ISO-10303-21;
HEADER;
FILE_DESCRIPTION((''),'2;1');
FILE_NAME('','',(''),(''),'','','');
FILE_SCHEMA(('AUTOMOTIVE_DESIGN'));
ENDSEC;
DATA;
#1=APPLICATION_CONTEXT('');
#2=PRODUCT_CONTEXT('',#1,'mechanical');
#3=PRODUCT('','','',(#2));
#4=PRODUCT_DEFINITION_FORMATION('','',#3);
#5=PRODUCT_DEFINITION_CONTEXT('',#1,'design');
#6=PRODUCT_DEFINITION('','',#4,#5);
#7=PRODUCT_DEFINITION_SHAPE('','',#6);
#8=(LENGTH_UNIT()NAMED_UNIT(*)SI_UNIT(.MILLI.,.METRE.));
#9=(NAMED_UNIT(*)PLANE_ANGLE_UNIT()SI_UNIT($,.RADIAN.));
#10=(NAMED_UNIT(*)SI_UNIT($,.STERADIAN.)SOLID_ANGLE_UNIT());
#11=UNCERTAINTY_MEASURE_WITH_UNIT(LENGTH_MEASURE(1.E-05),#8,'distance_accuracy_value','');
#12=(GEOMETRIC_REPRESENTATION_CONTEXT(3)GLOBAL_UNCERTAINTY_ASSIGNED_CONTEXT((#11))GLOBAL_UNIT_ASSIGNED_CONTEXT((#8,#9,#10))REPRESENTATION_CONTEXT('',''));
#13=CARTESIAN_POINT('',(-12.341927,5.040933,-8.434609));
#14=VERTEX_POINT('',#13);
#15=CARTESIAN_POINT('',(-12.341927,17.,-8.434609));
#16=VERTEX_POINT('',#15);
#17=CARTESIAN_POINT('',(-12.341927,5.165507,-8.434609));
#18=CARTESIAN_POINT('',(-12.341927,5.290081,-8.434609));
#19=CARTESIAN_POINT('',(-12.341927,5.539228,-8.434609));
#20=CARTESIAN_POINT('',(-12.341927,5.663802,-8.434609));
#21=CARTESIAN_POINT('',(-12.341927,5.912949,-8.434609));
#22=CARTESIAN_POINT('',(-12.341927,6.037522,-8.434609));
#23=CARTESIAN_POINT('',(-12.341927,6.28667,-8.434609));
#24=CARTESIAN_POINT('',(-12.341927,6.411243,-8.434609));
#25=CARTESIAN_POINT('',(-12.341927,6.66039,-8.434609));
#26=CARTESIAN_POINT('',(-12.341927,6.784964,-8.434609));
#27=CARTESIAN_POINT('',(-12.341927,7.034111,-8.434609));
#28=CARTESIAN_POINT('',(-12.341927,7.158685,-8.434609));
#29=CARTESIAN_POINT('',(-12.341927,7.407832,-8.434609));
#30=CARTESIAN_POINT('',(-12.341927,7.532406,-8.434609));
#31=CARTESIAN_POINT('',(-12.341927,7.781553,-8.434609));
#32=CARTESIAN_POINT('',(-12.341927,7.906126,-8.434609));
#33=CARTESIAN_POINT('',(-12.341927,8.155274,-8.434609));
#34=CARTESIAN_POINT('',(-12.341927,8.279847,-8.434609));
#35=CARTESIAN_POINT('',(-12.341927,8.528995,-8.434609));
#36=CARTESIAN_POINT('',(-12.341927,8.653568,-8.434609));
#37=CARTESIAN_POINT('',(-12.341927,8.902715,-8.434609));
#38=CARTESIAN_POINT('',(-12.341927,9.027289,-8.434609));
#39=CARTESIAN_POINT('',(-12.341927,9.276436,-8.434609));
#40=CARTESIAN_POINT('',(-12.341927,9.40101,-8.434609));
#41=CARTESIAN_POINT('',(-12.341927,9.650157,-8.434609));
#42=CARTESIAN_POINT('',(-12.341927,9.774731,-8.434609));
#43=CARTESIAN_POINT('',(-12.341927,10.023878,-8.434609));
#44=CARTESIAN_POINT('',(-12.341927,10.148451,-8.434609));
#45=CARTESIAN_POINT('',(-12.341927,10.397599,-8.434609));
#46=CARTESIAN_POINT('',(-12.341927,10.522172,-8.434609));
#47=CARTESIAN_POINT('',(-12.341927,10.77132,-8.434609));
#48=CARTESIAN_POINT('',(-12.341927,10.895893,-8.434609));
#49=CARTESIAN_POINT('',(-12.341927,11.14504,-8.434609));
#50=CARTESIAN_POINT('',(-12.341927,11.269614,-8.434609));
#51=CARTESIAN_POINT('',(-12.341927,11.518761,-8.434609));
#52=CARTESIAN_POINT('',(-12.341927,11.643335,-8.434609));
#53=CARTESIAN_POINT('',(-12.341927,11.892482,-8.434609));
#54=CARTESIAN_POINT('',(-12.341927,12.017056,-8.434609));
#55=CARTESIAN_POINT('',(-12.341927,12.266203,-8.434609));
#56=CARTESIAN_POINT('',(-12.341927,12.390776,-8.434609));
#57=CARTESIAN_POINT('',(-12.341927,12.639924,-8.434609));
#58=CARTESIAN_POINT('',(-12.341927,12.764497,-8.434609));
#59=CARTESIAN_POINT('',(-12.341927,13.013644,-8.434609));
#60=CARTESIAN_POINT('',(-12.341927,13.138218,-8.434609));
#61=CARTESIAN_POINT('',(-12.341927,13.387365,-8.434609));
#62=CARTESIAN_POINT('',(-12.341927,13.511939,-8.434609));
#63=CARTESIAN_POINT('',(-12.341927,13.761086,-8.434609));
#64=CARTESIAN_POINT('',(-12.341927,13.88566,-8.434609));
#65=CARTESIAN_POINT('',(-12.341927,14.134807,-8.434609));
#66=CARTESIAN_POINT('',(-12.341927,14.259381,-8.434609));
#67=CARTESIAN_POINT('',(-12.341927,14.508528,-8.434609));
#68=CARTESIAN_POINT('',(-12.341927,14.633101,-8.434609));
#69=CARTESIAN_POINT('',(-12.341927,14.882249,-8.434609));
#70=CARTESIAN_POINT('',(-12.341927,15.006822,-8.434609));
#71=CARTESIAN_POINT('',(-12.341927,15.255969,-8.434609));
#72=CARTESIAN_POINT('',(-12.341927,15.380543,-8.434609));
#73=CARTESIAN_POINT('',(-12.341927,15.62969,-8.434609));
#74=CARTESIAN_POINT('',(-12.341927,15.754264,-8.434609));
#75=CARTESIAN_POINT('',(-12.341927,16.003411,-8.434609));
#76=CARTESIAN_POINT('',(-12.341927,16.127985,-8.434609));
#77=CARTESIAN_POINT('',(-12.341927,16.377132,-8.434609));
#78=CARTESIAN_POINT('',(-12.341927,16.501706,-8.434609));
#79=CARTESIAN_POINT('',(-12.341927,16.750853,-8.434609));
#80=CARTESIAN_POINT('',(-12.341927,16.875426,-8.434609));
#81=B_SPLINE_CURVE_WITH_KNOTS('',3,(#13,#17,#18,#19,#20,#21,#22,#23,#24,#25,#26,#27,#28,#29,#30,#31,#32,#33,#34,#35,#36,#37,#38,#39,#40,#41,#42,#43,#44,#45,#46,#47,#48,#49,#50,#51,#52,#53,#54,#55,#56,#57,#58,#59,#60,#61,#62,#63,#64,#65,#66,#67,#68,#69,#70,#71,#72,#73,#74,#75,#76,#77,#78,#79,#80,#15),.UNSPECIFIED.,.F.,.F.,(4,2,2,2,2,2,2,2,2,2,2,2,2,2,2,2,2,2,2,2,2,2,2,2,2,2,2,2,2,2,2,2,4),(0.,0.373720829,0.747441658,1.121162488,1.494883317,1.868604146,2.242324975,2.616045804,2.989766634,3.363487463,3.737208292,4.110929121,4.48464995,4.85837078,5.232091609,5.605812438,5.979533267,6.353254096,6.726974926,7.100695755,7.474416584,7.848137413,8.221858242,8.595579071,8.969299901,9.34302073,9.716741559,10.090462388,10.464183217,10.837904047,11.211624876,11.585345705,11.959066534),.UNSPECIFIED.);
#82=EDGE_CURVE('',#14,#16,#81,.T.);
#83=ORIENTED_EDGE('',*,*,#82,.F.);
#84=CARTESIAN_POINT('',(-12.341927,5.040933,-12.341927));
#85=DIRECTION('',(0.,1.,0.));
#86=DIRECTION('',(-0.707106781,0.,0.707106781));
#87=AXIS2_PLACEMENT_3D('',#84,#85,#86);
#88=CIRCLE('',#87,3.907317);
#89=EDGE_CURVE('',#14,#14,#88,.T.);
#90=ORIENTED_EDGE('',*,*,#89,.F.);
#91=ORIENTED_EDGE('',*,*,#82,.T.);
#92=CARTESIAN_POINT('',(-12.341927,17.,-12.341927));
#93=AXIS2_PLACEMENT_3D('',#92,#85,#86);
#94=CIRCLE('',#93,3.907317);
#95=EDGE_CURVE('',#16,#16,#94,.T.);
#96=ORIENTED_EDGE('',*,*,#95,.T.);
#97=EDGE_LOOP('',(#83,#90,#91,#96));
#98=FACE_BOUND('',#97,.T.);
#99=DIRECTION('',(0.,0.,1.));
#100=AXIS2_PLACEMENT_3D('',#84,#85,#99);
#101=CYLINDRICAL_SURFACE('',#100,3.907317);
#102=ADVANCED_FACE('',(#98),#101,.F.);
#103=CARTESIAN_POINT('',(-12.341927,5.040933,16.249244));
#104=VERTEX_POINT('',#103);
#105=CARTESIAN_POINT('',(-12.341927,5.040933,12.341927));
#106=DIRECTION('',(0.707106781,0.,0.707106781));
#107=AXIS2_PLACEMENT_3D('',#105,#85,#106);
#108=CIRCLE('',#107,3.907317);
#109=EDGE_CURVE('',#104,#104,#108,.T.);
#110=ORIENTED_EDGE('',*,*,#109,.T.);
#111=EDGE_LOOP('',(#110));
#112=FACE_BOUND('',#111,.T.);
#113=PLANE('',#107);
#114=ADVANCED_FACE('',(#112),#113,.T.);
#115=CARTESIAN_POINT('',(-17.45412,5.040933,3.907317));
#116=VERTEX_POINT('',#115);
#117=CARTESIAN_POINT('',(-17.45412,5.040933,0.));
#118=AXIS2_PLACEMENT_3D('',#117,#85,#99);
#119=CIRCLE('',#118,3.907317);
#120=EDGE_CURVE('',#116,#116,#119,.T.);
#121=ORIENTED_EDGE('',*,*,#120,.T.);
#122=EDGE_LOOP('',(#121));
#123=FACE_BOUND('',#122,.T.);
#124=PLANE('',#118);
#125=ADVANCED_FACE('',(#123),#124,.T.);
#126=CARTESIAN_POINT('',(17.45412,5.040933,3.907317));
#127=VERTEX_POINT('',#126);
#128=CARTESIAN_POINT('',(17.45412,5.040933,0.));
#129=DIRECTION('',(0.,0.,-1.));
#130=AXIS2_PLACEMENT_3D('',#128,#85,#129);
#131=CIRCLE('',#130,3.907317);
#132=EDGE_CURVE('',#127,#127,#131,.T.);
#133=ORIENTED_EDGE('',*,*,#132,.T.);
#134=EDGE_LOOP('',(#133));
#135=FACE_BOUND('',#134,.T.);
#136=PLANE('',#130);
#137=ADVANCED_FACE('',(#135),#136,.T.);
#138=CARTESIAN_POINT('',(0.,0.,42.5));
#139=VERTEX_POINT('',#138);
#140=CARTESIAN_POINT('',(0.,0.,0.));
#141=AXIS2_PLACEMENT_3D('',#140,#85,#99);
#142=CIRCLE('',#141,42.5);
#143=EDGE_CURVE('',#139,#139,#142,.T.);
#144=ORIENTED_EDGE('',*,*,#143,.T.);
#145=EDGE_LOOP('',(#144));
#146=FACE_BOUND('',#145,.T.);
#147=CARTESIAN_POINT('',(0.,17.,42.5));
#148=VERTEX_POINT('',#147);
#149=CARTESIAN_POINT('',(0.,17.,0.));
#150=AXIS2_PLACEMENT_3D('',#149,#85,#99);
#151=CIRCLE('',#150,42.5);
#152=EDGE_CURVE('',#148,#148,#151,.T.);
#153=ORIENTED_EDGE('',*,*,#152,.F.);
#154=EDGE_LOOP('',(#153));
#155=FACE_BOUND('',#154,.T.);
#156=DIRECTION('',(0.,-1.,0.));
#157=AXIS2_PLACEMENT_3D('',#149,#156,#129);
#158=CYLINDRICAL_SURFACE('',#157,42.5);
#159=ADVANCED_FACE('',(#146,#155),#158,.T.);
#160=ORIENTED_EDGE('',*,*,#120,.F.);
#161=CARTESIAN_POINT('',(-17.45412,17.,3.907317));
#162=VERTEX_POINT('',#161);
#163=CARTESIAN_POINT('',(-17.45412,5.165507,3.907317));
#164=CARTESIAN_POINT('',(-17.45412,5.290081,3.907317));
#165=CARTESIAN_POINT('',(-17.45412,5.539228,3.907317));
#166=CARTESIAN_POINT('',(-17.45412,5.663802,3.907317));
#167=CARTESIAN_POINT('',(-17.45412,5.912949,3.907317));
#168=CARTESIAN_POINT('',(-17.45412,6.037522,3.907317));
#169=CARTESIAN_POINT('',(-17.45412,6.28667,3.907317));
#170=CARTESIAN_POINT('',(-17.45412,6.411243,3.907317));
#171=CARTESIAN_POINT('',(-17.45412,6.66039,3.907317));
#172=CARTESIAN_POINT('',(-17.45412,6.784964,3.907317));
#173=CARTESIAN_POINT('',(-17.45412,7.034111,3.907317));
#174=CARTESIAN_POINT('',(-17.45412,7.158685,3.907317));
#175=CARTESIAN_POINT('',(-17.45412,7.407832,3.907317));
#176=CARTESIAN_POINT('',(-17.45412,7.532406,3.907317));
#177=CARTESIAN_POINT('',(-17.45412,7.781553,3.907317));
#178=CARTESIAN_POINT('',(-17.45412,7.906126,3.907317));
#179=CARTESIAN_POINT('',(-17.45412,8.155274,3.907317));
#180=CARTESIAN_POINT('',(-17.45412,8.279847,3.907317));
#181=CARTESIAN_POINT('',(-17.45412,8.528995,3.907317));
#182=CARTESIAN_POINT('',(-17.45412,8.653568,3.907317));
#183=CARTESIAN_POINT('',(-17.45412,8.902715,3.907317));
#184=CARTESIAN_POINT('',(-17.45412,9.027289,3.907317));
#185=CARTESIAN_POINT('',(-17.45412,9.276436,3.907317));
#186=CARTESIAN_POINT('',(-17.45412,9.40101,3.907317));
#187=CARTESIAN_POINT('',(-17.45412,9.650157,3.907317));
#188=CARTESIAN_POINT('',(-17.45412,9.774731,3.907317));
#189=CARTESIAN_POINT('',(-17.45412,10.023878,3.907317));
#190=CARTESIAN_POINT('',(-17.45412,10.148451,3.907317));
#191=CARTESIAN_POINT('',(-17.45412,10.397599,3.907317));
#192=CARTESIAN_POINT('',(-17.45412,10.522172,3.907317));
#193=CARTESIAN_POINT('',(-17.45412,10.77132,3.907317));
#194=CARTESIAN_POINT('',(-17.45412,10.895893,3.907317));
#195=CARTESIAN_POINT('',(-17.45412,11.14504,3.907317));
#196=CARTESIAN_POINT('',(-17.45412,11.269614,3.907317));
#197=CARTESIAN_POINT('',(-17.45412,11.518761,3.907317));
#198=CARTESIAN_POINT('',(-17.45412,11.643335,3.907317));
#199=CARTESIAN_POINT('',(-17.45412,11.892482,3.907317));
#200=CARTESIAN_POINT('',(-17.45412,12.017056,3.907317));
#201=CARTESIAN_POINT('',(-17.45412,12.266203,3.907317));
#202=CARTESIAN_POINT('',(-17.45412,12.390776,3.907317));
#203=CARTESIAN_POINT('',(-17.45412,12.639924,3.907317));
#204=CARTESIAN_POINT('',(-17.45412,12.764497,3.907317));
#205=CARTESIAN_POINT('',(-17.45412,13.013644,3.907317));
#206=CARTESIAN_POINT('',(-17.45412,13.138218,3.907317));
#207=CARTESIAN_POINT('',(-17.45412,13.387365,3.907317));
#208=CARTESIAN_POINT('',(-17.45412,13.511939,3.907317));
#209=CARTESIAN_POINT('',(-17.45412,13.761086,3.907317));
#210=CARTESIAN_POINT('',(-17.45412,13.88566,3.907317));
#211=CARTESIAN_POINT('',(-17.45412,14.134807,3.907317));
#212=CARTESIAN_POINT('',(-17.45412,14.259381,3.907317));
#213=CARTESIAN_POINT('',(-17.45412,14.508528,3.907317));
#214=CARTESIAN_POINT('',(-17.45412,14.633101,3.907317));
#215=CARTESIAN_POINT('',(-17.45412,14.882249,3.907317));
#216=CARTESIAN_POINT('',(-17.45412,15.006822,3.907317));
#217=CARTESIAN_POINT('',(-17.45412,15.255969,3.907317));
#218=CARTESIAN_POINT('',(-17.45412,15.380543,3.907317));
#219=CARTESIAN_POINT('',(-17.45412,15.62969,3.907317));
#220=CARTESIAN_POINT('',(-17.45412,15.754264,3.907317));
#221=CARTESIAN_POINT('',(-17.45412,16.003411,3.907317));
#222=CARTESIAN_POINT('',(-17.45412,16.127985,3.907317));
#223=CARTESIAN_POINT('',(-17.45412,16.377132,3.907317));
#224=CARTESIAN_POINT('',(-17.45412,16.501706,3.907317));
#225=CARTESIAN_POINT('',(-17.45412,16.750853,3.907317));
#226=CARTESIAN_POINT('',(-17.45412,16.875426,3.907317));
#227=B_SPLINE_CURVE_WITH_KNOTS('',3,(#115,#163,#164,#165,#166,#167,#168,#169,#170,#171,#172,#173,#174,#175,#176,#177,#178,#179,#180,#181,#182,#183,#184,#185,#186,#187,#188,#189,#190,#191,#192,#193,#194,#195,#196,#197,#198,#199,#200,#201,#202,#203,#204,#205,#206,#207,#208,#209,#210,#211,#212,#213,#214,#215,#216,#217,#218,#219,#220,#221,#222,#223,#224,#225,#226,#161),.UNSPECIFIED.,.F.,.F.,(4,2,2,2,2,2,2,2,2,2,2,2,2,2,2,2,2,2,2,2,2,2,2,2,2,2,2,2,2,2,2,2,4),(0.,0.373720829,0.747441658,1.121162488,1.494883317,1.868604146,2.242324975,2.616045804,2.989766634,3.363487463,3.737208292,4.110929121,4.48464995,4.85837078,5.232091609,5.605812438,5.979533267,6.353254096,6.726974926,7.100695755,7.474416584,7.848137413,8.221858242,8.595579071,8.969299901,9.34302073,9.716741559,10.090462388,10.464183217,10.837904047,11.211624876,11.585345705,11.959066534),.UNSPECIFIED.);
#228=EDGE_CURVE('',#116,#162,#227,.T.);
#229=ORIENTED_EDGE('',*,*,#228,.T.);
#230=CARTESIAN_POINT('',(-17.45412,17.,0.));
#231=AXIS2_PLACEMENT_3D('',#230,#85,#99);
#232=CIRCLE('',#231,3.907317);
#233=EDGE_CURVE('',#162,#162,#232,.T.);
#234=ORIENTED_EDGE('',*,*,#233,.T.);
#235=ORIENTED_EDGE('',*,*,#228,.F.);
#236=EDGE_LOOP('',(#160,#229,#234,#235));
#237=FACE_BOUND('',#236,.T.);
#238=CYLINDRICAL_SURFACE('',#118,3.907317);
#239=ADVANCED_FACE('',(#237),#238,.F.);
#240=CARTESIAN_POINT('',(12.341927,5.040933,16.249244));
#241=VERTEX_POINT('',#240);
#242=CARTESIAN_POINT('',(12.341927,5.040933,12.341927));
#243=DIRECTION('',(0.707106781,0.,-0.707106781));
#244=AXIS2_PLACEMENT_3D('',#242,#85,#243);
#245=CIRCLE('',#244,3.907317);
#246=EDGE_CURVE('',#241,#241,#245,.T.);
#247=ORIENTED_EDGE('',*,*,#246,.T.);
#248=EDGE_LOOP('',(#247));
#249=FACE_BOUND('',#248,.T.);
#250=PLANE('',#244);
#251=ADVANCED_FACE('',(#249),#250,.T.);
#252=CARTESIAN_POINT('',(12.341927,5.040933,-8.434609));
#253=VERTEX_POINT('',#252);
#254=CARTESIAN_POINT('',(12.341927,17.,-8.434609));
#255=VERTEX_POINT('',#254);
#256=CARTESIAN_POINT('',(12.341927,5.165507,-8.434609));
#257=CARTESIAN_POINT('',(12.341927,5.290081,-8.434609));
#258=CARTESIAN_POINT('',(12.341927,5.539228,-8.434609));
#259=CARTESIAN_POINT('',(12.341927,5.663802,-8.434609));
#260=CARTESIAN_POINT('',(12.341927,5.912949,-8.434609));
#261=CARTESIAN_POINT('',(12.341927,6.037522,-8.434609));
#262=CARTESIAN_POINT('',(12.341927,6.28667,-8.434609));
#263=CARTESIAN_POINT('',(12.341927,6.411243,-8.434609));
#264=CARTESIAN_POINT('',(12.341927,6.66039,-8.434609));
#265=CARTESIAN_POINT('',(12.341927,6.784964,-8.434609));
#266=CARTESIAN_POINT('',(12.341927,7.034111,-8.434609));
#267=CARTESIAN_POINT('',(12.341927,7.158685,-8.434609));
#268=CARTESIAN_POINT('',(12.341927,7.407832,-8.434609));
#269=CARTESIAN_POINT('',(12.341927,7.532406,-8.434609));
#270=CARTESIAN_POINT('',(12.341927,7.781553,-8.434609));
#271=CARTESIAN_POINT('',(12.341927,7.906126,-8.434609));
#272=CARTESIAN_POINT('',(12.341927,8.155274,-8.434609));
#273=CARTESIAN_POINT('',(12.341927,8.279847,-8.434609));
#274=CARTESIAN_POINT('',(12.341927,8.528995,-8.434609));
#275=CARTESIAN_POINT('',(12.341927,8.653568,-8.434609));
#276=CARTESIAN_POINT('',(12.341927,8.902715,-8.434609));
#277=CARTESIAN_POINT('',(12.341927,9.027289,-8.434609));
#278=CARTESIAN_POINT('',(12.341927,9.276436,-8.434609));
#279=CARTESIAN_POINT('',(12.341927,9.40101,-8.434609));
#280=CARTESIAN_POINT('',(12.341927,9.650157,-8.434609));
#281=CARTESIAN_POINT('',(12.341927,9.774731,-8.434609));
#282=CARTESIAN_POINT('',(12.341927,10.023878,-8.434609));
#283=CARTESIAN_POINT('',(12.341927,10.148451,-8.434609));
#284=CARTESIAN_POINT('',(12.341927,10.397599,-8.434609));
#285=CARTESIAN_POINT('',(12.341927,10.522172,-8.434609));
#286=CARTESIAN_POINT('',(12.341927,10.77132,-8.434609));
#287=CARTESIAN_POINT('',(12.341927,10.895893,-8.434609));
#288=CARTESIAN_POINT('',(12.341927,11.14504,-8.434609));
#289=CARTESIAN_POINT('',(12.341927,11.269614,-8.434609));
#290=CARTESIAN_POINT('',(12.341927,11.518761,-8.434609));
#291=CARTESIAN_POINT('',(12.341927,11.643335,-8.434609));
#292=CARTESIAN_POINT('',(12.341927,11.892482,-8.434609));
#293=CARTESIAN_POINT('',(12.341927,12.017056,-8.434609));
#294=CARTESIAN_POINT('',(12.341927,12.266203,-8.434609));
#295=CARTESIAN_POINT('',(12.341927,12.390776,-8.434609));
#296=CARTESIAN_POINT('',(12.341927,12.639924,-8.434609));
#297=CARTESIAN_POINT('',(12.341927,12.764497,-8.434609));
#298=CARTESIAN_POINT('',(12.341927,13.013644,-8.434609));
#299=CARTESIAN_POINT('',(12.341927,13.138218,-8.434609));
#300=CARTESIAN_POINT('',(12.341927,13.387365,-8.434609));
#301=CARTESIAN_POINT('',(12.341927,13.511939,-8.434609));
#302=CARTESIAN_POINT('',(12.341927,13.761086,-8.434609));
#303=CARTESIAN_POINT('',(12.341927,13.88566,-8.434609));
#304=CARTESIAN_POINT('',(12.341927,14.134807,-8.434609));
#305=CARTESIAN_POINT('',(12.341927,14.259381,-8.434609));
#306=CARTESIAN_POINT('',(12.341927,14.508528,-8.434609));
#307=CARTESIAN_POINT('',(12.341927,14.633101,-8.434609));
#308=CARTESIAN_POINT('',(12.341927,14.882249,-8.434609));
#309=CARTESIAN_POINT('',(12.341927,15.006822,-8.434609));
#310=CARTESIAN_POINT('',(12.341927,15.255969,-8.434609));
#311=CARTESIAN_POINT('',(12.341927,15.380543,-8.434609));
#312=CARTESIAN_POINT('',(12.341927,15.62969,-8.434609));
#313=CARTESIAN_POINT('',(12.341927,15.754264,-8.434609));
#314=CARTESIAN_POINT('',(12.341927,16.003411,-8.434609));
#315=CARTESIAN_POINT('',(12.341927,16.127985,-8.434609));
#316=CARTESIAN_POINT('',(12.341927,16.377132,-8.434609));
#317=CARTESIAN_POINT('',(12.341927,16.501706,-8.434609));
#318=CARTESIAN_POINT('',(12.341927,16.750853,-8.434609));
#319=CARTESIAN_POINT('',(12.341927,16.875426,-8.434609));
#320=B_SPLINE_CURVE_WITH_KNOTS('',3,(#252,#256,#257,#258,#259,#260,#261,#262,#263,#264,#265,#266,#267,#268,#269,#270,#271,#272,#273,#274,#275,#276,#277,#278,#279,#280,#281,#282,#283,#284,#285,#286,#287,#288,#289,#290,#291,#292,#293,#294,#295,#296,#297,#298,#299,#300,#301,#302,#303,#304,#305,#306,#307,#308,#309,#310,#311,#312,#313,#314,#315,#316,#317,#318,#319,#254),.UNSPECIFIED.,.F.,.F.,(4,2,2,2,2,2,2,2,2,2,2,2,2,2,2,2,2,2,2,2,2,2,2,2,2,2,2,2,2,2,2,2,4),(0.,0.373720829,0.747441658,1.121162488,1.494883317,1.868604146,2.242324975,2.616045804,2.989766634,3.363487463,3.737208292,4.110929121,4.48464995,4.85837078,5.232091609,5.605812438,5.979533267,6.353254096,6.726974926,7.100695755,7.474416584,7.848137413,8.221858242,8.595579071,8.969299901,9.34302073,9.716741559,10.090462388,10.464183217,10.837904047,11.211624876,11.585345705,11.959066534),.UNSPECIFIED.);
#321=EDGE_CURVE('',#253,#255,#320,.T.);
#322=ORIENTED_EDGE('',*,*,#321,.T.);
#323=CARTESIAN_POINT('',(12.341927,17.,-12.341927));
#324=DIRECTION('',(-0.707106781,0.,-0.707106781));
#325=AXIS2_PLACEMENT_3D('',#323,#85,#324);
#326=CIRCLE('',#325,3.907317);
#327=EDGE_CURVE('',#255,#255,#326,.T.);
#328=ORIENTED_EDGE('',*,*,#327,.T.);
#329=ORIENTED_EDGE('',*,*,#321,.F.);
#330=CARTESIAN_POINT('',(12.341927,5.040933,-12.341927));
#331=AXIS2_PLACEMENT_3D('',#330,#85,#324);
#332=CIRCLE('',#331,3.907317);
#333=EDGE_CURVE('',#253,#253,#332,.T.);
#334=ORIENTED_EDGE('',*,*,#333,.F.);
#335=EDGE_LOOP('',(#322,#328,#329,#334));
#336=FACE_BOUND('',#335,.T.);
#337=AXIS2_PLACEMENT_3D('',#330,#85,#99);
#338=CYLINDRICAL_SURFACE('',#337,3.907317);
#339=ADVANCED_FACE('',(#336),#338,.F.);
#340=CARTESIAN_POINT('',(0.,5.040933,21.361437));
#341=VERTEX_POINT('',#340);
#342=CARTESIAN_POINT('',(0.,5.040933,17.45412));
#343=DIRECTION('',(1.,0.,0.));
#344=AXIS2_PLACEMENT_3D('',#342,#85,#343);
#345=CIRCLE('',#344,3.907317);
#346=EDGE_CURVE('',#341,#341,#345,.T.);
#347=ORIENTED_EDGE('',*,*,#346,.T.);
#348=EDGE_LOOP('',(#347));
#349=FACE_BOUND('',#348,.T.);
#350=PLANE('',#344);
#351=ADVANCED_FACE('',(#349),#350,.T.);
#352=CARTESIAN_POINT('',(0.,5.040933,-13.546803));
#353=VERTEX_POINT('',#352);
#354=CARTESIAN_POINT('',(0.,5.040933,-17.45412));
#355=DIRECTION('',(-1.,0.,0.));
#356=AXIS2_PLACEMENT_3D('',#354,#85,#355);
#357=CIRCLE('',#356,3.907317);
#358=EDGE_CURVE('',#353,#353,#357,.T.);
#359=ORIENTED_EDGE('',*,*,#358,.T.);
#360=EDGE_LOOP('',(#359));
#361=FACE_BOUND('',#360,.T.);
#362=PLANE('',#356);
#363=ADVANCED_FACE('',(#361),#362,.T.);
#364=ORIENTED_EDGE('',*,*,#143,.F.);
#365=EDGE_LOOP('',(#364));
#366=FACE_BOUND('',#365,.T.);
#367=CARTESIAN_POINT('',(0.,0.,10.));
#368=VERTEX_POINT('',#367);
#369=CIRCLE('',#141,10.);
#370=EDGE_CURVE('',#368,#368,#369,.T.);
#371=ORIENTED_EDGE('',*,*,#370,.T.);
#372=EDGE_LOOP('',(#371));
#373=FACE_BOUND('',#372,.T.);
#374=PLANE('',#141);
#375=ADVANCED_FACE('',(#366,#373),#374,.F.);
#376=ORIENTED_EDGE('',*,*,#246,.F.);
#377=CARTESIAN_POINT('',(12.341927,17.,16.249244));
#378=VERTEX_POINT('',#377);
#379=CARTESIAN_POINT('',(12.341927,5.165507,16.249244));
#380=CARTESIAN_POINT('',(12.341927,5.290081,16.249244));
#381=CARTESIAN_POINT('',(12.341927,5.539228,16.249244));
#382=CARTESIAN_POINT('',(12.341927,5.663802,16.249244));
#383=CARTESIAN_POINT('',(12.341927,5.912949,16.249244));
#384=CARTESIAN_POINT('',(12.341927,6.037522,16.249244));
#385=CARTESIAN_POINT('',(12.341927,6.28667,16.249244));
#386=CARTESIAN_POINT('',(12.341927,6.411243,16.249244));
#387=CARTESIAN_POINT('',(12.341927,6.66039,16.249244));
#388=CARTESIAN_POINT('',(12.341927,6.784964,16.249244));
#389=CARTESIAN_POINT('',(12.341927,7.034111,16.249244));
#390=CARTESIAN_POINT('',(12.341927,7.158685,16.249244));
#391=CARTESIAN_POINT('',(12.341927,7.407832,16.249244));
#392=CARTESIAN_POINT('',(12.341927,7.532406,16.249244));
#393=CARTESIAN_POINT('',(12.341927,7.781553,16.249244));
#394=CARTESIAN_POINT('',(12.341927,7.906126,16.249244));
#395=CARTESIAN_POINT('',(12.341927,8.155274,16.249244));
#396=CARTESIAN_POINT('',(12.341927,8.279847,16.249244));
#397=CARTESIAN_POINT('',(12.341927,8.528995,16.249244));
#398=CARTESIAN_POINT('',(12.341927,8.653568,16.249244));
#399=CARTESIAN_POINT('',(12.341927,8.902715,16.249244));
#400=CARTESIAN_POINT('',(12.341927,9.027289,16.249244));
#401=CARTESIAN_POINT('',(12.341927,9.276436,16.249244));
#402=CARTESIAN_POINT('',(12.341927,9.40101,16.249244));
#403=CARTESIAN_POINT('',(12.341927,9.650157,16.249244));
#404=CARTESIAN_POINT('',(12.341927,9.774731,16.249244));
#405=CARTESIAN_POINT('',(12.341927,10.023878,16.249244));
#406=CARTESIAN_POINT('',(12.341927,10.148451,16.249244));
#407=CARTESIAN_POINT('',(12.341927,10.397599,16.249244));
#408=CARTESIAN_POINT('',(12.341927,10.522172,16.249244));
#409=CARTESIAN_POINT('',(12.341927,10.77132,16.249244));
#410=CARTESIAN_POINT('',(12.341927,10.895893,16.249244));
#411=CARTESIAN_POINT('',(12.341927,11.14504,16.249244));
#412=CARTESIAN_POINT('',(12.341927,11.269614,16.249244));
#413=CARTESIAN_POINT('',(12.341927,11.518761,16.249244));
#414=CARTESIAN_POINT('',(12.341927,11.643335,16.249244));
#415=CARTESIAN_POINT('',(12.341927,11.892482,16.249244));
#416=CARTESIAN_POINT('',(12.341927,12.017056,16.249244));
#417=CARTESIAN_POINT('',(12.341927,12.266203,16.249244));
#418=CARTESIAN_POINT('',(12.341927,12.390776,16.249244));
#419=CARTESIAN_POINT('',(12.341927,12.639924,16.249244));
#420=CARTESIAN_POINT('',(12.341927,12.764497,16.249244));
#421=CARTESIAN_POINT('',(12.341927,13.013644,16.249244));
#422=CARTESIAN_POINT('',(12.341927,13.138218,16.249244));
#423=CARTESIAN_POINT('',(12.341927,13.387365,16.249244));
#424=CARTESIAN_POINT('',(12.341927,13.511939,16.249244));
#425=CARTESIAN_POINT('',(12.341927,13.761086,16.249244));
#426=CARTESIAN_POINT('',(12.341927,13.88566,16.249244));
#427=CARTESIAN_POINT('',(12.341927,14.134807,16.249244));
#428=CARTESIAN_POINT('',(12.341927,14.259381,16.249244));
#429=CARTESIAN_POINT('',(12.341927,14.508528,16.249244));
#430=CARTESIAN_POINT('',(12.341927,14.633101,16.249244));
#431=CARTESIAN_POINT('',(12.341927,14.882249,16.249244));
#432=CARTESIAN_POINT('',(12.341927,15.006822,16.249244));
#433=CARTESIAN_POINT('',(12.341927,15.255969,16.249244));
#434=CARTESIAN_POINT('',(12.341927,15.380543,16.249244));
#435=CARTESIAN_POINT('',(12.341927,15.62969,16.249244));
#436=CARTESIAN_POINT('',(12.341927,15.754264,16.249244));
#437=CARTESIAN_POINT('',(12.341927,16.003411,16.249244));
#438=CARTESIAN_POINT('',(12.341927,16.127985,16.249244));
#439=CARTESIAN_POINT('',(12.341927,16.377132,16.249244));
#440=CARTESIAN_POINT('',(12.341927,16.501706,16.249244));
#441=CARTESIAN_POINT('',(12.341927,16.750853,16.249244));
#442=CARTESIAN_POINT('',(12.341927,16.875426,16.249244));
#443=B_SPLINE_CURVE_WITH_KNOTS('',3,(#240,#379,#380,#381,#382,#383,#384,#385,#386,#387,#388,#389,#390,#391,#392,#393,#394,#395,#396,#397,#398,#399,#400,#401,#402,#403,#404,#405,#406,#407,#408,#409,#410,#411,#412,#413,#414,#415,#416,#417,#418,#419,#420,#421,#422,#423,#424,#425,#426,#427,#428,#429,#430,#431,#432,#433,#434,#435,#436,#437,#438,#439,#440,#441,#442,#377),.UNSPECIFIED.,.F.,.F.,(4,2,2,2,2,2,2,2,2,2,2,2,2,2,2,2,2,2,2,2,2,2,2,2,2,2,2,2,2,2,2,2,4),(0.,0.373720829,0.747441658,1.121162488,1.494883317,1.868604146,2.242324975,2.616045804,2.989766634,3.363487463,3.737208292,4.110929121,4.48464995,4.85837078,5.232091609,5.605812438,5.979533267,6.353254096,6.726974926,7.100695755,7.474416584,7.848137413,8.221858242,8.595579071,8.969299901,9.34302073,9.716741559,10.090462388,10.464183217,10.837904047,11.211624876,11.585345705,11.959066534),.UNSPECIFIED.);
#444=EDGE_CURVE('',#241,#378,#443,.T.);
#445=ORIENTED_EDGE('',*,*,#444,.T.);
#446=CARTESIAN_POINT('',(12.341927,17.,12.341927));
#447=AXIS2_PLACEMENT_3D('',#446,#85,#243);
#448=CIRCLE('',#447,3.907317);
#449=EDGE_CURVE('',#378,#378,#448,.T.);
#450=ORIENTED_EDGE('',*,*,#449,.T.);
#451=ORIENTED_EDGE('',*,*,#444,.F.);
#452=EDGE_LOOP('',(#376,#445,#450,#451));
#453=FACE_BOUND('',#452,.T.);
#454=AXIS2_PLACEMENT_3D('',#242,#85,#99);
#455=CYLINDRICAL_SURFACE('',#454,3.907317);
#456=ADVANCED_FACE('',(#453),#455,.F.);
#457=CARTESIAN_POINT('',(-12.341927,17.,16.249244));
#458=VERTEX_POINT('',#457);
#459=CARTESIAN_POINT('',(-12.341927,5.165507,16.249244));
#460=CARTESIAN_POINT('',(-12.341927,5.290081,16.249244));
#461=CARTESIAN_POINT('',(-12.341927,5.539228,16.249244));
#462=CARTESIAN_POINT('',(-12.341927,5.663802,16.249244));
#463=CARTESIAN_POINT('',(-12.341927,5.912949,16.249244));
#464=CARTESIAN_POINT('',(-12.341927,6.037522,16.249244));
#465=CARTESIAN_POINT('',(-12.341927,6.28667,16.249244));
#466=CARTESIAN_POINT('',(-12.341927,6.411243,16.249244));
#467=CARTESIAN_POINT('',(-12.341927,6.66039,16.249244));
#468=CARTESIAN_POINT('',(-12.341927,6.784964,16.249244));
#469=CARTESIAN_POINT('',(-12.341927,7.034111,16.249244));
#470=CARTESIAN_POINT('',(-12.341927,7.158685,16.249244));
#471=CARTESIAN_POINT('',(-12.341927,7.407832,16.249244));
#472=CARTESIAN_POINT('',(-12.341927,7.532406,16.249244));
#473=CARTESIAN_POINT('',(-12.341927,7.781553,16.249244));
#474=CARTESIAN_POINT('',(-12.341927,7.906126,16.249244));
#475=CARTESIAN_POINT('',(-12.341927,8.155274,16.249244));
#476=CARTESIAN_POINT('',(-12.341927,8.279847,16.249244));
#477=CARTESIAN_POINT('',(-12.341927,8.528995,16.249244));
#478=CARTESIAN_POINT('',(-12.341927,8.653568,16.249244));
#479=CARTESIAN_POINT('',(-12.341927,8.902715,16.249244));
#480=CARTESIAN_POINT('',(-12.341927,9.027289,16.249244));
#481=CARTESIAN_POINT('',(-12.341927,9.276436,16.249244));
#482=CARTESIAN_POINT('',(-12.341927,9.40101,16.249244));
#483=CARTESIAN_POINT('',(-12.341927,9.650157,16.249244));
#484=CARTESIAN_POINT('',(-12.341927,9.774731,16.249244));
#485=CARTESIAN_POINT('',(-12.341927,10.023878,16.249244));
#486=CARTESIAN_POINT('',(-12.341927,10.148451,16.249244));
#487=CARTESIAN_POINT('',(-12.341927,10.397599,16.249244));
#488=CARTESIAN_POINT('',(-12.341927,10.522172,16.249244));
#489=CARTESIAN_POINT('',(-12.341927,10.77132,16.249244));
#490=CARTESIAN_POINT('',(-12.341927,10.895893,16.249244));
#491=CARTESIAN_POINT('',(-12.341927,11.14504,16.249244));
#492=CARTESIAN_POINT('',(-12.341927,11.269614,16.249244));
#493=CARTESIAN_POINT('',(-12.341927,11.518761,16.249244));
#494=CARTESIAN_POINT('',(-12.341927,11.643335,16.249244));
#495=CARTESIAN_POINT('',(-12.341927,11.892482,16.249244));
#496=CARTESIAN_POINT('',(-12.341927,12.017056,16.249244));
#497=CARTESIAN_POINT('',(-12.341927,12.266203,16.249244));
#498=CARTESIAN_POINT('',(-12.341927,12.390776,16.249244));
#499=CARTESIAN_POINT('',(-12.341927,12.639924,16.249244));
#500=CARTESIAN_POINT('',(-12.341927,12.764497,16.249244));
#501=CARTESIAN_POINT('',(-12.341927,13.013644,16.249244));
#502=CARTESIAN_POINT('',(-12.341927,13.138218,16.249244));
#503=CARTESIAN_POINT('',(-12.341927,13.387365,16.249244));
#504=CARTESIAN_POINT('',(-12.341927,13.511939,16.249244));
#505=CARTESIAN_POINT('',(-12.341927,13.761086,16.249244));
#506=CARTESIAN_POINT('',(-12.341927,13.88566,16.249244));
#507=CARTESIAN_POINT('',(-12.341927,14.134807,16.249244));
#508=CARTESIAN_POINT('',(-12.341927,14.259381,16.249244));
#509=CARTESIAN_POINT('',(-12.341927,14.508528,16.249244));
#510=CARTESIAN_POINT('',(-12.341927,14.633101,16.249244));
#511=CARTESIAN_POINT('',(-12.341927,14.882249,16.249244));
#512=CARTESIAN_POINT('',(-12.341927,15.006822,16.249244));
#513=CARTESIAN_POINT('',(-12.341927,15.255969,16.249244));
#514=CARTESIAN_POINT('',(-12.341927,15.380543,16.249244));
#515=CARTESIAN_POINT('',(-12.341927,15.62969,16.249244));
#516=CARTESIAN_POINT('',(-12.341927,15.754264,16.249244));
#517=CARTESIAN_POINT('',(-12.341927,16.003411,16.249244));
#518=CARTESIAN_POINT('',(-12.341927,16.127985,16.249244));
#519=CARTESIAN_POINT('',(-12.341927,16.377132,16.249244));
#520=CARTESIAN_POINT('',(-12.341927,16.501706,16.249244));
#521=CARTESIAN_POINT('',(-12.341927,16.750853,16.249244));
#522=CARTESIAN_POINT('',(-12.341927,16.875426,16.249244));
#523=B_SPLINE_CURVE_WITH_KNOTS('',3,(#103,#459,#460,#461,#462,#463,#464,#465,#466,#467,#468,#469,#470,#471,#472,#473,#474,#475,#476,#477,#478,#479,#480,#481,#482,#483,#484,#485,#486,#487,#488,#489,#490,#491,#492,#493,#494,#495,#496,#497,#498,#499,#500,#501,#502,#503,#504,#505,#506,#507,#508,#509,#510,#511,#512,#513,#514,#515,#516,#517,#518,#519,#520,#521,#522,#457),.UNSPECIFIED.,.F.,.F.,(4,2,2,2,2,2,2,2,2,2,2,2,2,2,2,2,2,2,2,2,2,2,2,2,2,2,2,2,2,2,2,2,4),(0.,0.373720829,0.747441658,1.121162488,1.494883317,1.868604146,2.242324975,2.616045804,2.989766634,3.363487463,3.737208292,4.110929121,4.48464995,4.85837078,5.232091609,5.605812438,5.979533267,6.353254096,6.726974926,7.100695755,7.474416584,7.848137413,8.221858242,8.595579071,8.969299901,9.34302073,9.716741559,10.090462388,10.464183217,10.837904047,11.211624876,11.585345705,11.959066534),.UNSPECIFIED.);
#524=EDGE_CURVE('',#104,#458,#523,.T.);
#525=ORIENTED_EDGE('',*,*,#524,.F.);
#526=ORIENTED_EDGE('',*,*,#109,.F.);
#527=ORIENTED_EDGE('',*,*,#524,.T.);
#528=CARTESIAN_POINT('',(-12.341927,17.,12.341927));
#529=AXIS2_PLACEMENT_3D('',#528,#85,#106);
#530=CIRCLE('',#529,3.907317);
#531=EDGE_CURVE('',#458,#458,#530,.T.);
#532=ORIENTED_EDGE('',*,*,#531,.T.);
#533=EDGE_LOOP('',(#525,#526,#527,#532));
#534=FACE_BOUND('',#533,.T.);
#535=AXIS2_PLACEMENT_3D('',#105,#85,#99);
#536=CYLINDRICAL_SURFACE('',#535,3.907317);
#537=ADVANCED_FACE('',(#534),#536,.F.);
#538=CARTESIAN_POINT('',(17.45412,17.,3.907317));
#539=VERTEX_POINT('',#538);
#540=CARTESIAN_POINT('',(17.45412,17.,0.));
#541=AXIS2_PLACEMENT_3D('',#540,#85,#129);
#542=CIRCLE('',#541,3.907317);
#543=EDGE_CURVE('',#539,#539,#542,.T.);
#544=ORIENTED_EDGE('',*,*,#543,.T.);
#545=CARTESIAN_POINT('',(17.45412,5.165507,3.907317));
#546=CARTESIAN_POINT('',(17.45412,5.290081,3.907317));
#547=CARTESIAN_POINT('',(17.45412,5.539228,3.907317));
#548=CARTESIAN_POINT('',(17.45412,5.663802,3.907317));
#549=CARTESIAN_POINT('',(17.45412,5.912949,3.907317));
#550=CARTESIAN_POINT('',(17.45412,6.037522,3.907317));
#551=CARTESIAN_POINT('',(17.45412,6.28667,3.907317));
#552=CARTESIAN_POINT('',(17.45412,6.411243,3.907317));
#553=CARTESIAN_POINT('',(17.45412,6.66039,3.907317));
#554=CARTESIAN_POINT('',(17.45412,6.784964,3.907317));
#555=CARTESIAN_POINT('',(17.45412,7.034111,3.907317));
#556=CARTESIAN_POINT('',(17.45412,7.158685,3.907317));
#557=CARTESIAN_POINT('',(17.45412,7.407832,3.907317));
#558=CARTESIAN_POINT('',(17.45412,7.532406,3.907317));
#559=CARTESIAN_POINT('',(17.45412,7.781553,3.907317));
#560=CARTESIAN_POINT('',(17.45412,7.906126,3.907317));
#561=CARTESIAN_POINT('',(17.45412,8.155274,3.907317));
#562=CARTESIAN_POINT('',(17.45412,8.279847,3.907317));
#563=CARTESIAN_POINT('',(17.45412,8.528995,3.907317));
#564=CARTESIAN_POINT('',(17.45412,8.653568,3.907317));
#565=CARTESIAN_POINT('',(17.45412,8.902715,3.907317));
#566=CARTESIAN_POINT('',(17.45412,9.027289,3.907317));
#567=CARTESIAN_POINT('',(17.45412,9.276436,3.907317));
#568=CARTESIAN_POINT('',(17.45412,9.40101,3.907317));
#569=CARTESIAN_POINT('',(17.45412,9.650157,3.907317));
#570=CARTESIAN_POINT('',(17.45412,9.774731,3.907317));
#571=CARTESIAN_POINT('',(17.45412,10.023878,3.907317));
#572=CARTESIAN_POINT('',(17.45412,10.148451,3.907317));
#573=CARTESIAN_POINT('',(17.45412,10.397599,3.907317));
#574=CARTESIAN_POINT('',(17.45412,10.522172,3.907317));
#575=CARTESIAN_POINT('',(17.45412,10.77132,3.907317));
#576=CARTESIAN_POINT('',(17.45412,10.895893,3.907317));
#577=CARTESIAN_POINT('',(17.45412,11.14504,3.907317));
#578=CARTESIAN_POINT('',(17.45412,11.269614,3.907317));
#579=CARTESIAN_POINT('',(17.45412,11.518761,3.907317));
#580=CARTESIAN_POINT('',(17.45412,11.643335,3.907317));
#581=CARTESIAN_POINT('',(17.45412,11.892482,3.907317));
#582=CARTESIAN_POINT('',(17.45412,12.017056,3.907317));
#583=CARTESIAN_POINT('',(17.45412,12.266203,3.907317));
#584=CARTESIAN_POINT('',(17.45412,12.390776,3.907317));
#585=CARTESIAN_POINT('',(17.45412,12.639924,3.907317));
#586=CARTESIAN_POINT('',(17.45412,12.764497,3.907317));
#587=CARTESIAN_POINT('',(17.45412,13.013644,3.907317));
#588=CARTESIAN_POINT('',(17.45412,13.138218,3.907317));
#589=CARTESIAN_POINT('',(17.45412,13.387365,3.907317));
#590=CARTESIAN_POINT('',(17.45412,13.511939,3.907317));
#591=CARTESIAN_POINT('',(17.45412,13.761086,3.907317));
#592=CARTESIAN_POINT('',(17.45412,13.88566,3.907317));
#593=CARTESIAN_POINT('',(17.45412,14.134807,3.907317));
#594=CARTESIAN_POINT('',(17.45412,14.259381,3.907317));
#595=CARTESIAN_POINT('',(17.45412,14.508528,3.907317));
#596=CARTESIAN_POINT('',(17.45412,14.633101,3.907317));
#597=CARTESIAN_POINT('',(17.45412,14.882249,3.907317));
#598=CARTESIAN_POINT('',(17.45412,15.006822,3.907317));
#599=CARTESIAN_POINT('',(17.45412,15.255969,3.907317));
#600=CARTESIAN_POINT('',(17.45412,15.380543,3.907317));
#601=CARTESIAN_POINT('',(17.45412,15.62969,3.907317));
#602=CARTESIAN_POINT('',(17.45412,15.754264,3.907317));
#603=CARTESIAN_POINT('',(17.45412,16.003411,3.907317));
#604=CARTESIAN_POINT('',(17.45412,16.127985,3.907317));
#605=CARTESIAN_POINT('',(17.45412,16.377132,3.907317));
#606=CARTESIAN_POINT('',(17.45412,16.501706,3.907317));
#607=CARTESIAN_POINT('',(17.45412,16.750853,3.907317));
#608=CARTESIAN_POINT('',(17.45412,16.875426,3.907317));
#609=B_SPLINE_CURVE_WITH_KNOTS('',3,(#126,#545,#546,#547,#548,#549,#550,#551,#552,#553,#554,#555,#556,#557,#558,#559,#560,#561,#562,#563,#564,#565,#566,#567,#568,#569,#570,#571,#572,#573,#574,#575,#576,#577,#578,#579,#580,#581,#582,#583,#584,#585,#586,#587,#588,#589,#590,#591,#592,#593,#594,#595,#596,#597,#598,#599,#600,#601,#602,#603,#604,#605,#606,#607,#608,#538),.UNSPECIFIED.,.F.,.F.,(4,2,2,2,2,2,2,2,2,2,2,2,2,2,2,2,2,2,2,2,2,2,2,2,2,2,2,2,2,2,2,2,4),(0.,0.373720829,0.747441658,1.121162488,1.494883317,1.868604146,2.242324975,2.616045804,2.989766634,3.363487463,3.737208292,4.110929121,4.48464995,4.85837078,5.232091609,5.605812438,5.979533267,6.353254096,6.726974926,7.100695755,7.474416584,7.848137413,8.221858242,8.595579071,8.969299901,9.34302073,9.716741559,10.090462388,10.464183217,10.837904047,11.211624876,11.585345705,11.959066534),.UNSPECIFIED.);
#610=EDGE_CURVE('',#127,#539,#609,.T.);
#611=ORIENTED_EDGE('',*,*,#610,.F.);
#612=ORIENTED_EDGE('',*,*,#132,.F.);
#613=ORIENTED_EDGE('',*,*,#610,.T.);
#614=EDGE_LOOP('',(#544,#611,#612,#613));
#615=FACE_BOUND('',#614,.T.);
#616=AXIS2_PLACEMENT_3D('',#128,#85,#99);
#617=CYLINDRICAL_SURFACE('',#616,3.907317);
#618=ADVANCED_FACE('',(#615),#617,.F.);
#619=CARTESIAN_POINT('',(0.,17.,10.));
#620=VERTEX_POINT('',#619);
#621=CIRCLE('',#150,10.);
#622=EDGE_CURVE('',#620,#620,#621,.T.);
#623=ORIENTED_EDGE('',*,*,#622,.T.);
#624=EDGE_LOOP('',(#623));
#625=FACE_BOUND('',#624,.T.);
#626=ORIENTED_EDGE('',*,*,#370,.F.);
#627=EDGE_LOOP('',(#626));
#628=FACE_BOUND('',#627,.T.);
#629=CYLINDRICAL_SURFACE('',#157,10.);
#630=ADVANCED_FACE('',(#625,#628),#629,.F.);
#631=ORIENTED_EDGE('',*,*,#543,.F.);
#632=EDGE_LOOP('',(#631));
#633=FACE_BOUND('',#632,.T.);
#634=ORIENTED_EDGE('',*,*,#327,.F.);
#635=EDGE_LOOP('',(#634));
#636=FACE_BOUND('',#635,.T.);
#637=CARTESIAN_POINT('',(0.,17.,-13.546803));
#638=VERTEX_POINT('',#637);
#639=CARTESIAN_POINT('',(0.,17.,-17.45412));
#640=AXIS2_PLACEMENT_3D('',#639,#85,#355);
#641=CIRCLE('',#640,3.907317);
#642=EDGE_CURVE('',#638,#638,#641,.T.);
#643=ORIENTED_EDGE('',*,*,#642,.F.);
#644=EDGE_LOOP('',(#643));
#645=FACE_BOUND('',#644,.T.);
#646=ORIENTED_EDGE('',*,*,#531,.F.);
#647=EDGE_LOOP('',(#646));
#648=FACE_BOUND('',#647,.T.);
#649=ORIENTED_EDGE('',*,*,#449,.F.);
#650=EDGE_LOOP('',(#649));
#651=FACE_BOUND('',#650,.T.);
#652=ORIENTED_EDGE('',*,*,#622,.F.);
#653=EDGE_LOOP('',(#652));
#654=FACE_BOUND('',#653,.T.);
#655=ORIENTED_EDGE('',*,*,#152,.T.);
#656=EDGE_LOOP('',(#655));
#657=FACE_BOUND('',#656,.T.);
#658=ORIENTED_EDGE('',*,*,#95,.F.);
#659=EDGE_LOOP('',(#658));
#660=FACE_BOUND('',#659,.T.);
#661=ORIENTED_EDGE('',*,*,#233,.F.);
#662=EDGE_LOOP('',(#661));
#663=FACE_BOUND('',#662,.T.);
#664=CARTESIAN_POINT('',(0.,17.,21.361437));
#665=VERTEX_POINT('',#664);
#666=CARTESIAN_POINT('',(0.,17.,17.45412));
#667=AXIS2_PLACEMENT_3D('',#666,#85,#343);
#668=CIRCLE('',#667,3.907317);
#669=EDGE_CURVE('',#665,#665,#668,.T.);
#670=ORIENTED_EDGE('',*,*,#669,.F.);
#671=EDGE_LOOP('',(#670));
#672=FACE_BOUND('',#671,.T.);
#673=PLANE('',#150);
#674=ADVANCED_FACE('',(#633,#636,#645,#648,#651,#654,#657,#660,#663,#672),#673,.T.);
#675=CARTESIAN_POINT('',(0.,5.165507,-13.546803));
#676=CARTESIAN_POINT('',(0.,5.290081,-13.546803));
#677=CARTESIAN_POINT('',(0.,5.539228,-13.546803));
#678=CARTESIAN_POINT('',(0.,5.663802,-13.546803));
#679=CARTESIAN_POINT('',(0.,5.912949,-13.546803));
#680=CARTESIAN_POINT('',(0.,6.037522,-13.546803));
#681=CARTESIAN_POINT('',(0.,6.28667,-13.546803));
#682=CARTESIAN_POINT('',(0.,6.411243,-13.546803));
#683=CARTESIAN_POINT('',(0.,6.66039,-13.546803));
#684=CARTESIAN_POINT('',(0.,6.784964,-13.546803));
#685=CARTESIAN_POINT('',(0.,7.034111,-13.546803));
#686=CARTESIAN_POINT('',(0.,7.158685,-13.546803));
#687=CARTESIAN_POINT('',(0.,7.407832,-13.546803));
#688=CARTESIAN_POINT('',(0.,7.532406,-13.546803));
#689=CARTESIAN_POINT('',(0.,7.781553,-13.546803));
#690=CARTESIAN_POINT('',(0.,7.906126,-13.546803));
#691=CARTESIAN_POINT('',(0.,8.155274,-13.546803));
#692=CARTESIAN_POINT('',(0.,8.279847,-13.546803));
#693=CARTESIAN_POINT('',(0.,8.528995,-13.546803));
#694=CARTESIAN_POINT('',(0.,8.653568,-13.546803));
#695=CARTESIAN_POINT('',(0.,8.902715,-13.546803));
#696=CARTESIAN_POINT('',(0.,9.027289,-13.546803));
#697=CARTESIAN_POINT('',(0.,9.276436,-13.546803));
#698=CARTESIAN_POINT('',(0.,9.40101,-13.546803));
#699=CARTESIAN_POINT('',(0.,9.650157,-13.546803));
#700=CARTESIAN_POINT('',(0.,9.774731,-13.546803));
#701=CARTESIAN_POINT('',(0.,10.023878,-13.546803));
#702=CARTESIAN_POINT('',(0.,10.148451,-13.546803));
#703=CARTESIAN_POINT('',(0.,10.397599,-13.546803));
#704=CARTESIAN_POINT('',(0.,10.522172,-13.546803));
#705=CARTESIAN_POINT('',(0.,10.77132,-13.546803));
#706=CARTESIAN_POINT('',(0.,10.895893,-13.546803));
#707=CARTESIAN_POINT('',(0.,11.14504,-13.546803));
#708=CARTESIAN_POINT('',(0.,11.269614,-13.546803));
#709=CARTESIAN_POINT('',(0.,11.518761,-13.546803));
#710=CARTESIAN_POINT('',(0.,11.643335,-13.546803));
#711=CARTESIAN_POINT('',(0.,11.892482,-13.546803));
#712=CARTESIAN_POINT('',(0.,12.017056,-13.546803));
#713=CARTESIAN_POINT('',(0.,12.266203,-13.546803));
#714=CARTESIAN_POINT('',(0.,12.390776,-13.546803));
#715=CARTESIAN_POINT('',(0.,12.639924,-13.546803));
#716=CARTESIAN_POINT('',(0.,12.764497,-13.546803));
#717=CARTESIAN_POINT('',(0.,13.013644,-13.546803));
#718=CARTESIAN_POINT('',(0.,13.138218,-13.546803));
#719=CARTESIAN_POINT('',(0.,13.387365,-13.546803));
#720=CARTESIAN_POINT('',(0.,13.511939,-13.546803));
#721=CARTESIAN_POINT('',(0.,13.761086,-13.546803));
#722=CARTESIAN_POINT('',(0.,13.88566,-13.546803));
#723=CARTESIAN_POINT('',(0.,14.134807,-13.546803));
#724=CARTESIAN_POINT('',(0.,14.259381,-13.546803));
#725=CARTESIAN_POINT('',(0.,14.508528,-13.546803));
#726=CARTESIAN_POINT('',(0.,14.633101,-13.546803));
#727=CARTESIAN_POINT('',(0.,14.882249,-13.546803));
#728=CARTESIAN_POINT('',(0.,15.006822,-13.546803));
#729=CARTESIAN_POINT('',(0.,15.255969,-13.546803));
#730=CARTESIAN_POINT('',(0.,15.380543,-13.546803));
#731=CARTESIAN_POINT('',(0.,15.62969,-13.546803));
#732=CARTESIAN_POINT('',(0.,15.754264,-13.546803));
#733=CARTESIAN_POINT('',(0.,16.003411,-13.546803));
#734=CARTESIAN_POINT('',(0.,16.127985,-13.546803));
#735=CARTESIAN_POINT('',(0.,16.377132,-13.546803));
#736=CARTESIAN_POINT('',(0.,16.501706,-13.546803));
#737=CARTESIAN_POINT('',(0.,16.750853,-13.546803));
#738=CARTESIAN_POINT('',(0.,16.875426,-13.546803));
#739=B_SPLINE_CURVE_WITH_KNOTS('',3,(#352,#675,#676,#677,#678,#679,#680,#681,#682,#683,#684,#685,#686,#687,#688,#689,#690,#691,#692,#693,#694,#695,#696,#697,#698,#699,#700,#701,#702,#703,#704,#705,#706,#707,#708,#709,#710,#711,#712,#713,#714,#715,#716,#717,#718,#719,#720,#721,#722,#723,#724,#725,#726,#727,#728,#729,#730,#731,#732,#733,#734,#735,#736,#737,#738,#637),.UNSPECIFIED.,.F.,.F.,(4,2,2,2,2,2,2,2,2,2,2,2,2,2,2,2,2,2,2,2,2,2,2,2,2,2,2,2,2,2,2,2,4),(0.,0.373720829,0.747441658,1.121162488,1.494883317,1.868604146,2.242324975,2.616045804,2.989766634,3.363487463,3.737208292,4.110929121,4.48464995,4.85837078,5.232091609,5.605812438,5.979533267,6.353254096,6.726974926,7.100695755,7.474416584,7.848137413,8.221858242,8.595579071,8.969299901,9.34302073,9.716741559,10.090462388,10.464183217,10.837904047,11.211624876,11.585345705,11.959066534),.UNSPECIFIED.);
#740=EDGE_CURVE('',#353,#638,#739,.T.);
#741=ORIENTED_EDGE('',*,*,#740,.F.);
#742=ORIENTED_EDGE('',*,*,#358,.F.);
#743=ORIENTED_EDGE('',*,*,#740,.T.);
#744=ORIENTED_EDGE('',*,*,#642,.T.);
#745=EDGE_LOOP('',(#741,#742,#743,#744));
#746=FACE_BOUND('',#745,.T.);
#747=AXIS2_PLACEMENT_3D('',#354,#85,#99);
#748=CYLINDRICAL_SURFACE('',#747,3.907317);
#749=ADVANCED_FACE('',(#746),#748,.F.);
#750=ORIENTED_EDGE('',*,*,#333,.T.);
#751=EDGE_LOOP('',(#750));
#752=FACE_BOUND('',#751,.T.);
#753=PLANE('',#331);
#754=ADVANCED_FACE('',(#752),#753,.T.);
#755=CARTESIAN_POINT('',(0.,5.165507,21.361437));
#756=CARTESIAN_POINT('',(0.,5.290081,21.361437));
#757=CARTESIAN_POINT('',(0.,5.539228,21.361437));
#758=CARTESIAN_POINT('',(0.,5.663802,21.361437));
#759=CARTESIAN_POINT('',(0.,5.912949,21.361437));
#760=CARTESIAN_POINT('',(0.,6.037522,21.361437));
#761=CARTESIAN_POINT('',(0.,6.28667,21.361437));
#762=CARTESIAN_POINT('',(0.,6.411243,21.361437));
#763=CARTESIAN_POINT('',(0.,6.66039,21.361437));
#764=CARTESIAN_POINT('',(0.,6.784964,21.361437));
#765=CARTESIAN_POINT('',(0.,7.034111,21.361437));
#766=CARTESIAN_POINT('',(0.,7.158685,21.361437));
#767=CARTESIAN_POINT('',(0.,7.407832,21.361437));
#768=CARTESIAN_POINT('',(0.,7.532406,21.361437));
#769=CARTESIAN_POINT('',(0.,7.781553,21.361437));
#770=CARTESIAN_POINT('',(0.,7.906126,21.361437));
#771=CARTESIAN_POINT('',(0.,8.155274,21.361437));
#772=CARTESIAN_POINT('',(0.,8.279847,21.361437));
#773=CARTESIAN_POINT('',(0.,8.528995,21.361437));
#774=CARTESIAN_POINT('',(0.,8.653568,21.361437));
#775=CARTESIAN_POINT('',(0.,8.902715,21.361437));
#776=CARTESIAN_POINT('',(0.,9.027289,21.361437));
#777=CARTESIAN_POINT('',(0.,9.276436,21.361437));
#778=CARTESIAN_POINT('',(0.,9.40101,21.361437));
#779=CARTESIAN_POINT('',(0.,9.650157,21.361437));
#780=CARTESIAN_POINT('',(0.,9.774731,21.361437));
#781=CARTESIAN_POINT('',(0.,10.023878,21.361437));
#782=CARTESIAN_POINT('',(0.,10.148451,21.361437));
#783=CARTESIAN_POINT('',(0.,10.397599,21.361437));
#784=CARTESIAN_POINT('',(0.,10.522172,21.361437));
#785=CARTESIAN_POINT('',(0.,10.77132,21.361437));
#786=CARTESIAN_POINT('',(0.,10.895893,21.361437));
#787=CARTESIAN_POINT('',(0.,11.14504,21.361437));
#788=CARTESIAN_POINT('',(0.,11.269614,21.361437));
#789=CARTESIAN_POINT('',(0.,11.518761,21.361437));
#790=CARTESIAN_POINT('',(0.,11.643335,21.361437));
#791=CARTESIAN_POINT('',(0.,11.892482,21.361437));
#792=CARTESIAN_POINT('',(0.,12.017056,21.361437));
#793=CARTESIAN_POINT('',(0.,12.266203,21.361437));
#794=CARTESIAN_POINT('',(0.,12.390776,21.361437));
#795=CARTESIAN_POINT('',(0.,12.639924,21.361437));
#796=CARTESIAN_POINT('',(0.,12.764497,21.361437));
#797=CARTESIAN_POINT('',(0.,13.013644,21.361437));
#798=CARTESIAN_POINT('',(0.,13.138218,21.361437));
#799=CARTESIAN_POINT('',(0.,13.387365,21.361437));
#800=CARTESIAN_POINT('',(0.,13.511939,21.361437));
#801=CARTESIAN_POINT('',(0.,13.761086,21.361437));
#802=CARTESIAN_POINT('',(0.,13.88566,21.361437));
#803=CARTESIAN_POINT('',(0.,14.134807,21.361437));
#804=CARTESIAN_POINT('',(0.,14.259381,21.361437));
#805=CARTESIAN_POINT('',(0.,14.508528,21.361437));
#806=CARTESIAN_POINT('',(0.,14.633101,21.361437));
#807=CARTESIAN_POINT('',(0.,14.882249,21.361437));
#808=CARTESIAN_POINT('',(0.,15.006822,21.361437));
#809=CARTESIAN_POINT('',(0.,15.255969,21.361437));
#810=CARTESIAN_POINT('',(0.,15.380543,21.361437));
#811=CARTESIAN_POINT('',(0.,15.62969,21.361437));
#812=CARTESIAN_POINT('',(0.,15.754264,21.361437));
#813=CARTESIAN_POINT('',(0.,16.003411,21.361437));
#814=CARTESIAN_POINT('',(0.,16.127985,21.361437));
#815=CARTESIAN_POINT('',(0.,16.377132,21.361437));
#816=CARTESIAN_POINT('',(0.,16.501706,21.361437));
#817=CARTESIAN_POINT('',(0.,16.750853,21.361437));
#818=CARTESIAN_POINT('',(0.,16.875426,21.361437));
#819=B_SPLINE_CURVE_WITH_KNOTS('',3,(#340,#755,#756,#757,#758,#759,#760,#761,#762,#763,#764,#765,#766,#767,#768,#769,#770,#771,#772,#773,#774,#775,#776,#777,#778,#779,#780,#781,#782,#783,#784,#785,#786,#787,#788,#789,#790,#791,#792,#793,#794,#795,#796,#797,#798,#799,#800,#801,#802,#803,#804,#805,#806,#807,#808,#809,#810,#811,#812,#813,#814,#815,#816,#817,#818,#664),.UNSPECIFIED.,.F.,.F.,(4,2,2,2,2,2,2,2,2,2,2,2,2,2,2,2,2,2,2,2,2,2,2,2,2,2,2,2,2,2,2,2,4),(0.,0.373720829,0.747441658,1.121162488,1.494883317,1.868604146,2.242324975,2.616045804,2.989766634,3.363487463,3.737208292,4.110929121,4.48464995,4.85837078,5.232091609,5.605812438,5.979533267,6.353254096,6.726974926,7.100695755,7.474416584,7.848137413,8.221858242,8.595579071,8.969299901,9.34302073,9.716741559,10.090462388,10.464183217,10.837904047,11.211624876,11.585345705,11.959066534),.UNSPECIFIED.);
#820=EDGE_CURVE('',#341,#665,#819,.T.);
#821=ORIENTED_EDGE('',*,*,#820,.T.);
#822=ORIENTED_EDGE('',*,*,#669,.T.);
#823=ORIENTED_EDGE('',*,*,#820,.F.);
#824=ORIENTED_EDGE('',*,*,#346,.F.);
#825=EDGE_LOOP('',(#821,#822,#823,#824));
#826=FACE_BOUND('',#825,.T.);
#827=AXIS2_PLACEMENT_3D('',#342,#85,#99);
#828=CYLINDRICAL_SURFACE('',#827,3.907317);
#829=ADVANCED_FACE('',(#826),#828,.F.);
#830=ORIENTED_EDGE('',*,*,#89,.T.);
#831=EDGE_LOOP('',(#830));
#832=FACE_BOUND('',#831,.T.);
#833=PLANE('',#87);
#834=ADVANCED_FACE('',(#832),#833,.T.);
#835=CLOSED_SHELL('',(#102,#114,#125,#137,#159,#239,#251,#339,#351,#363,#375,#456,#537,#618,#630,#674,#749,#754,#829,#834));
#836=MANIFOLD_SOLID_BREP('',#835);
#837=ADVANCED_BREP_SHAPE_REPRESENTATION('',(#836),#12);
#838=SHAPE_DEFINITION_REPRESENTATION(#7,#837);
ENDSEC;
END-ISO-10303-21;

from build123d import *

# Parameters (mm, degrees)
SKETCH1_R           = 42.5
BOSS_EXTRUDE1_DEPTH = 17
SKETCH2_R           = 10
CUT_EXTRUDE1_DEPTH  = 63.461988441
SKETCH3_R           = 3.907317334
CUT_EXTRUDE2_DEPTH  = 11.959066534
CIRPATTERN1_COUNT   = 8


with BuildPart() as part:
    # Sketch1 → Boss-Extrude1 (new body)
    with BuildSketch(Plane(origin=(0, 0, 0), x_dir=(1, 0, 0), z_dir=(0, 1, 0))):
        Circle(SKETCH1_R)
    extrude(amount=BOSS_EXTRUDE1_DEPTH)

    # Sketch2 → Cut-Extrude1 (cut, through all)
    with BuildSketch(Plane(origin=(0, 0, 0), x_dir=(1, 0, 0), z_dir=(0, 1, 0))):
        Circle(SKETCH2_R)
    extrude(amount=CUT_EXTRUDE1_DEPTH, mode=Mode.SUBTRACT)

    # Sketch3 → Cut-Extrude2 (cut)
    with BuildSketch(Plane(origin=(0, 17, 0), x_dir=(1, 0, 0), z_dir=(0, 1, 0))):
        with Locations((-17.454119994, 0)):
            Circle(SKETCH3_R)
    cut_extrude2 = extrude(amount=-CUT_EXTRUDE2_DEPTH, mode=Mode.SUBTRACT)

    # CirPattern1: Cut-Extrude2 ×8 about axis
    cirpattern1_axis = Axis((0, 0, 0), (0, 1, 0))
    for i in range(1, CIRPATTERN1_COUNT):
        add(cut_extrude2.rotate(cirpattern1_axis, i * 360 / CIRPATTERN1_COUNT), mode=Mode.SUBTRACT)


solid = part.part
